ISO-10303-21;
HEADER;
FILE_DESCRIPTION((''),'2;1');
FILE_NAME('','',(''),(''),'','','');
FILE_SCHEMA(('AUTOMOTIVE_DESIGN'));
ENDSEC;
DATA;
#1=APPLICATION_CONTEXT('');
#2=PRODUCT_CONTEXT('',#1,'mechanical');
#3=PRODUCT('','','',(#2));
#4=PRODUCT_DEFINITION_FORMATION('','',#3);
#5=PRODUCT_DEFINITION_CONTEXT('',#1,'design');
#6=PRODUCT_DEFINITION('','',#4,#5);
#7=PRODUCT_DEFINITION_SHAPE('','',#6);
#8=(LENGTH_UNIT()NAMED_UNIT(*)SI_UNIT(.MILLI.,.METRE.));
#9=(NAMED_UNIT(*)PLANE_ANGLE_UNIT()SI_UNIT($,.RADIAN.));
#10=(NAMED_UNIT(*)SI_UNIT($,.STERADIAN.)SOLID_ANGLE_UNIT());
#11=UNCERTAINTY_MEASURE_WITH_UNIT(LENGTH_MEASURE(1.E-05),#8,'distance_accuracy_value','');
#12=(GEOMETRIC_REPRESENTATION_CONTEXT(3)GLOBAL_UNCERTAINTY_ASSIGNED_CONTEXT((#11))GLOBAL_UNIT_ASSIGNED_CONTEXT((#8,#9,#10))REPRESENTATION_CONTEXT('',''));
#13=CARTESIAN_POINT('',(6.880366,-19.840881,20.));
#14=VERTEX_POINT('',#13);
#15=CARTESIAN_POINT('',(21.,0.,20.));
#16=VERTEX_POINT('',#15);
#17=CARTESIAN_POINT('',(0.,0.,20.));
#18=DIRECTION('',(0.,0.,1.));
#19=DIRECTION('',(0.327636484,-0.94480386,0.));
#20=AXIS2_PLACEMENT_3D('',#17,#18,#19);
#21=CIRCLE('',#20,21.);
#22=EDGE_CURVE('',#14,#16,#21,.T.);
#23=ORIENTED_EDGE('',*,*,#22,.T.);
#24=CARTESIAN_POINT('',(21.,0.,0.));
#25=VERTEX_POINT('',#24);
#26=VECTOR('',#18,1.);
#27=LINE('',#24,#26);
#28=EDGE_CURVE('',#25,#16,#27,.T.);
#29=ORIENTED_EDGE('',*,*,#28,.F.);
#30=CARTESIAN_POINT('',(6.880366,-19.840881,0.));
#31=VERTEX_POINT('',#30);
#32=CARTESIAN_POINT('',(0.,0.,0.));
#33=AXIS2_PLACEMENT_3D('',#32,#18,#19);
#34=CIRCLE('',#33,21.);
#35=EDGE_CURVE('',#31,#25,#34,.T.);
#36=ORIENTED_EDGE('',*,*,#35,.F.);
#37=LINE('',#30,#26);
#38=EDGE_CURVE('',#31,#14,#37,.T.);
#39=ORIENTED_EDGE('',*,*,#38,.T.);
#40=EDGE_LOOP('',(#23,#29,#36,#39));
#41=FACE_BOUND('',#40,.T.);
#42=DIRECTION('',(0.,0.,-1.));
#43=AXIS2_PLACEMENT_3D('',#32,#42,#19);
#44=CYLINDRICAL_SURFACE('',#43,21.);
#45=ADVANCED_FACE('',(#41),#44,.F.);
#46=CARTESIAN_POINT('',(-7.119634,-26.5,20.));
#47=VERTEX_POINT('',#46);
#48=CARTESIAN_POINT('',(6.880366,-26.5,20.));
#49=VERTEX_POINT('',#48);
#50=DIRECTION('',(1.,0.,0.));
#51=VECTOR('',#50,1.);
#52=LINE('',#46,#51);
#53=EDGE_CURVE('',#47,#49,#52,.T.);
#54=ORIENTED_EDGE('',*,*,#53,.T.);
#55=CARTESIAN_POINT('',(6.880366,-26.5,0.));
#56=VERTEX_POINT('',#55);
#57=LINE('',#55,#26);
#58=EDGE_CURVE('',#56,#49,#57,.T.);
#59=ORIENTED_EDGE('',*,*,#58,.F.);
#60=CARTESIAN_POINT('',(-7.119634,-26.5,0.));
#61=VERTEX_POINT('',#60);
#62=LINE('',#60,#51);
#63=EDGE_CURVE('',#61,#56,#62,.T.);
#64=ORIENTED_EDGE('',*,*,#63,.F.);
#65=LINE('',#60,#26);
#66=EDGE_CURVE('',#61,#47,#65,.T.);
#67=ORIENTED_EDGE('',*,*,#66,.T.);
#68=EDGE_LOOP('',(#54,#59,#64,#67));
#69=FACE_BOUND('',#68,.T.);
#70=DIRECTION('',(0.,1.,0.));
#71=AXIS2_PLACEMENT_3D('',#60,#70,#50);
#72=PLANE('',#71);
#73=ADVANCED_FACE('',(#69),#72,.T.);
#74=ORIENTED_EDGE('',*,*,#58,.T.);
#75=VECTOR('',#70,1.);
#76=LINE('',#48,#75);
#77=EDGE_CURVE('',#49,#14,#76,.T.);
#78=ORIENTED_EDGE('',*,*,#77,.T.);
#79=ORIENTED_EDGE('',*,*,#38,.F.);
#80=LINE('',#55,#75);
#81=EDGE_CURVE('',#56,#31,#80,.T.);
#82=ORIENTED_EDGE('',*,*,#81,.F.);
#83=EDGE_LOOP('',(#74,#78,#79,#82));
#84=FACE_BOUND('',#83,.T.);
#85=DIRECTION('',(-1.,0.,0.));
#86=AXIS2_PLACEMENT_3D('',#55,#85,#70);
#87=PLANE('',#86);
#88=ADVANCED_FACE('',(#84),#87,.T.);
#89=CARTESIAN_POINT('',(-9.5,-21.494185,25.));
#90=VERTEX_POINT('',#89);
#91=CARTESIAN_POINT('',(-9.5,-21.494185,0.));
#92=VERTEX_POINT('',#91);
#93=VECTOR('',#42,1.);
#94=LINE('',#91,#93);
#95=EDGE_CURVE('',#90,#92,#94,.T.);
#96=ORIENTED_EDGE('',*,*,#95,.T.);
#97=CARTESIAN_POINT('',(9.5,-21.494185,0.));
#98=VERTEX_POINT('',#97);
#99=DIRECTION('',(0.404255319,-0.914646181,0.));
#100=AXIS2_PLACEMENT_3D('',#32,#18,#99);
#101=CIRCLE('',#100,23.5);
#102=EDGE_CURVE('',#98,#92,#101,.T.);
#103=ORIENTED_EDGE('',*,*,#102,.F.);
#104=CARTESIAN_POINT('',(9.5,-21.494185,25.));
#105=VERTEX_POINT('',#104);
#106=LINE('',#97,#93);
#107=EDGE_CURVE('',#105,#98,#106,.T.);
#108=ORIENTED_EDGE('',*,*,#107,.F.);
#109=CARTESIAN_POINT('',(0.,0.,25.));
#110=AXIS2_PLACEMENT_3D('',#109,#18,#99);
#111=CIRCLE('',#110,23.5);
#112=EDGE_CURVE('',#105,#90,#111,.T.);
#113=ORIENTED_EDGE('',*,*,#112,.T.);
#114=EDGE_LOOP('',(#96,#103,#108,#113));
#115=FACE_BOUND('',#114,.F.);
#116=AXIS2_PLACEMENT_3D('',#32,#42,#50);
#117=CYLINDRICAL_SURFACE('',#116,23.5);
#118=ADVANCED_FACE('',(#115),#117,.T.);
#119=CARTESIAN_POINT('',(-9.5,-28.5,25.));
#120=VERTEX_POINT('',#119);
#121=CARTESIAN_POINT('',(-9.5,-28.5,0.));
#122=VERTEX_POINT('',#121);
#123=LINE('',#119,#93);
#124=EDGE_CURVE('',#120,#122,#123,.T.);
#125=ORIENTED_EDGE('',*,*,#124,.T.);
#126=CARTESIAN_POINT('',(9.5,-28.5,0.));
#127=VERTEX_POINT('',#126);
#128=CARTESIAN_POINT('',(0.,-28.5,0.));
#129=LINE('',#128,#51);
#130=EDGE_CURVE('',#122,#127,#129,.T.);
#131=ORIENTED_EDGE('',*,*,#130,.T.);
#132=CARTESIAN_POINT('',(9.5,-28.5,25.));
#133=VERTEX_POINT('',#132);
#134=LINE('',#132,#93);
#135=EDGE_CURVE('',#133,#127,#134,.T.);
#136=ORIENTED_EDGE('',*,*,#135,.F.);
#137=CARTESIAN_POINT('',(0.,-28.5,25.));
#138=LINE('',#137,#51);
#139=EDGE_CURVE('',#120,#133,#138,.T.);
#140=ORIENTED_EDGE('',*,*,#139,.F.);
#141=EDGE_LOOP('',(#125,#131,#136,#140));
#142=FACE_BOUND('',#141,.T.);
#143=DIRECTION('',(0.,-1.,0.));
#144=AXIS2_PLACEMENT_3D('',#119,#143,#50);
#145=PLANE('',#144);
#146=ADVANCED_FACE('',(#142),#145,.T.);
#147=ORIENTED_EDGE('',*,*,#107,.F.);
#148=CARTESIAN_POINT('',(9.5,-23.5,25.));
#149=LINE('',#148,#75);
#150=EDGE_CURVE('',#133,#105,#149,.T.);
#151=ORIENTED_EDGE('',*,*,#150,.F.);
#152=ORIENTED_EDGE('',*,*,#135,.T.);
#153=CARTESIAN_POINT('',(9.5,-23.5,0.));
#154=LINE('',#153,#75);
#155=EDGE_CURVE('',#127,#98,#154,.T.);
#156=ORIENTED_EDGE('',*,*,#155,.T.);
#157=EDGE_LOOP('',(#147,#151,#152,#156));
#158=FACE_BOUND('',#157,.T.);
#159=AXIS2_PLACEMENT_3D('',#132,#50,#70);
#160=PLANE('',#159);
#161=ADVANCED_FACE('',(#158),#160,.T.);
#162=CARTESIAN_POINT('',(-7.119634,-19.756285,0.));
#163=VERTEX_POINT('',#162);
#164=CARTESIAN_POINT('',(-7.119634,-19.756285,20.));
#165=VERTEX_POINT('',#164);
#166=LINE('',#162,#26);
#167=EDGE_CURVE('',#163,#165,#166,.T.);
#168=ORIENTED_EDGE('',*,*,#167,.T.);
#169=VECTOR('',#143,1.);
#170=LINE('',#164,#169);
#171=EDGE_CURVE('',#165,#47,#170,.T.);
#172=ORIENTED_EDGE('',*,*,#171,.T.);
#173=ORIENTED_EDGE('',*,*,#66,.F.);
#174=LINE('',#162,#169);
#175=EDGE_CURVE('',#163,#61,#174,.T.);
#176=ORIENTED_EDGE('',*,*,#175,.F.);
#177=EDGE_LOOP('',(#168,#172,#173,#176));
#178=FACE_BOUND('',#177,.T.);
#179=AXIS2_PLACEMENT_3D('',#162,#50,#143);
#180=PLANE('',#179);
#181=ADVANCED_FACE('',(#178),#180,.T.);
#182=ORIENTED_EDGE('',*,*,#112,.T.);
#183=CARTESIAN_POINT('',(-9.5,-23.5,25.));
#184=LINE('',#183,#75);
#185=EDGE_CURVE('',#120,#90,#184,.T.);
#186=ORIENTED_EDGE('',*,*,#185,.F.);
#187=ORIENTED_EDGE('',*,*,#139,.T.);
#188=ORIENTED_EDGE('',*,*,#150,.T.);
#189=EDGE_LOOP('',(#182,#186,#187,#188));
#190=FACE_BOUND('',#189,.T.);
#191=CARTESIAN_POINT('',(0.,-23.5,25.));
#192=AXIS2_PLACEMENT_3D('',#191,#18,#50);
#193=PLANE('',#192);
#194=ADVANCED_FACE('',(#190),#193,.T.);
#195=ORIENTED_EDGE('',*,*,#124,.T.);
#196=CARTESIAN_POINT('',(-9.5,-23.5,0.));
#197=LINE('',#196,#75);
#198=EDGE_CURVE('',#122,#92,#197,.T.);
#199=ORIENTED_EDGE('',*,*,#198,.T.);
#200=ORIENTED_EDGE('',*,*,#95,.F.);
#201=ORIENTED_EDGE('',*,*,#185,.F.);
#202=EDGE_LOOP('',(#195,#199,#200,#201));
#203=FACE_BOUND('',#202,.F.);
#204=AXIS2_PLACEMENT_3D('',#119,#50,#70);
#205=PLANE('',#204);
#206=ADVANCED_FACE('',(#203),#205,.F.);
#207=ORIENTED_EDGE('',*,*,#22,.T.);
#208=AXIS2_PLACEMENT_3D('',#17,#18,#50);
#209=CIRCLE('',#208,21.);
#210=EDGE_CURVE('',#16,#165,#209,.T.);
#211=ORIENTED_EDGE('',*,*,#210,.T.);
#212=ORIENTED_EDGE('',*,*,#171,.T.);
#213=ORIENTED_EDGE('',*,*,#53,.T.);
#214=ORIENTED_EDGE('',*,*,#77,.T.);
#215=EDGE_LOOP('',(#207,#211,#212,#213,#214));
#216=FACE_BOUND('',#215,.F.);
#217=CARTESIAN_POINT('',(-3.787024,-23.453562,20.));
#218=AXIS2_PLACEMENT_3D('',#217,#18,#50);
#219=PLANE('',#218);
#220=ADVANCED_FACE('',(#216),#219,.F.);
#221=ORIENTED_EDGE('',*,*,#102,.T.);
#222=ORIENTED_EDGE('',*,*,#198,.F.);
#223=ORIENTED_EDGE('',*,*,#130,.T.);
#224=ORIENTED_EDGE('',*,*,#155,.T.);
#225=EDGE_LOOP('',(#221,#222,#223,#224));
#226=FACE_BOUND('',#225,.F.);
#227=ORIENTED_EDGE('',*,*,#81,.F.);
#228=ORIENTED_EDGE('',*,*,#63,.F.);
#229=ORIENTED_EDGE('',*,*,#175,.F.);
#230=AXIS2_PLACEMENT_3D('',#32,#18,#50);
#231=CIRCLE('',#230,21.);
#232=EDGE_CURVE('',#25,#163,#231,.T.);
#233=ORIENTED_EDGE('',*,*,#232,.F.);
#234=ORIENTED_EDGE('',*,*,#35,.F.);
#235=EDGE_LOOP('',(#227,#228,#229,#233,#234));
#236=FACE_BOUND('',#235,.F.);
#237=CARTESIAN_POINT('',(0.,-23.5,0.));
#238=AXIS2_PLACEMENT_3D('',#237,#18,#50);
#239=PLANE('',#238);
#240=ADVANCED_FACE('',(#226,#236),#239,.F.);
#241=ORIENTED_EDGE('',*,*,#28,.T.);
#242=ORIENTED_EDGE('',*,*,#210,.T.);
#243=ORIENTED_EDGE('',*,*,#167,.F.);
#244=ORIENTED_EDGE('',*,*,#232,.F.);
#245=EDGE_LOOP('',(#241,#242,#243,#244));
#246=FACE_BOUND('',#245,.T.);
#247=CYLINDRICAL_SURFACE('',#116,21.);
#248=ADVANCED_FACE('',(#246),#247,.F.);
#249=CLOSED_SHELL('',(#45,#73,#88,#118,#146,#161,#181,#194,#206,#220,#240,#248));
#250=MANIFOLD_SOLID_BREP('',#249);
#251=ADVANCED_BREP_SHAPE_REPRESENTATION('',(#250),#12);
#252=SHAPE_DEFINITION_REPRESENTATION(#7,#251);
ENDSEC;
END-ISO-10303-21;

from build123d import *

# Parameters (mm, degrees)
F0_R     = 23.5
F1_DEPTH = 25
F2_W     = 19
F2_H     = 10
F3_DEPTH = 25
F5_DEPTH = 20


# Not quite as in the source:
# - a feature names something its author has since deleted; it is built from what else it names


with BuildPart() as f1:
    # F0 (on Top) → F1 (new body)
    with BuildSketch(Plane.XY):
        Circle(F0_R)
    extrude(amount=F1_DEPTH)

    # F2 (on face) → F3 (join)
    with BuildSketch(Plane.XY.offset(25)):
        with Locations((0, -23.5)):
            Rectangle(F2_W, F2_H)
    extrude(amount=-F3_DEPTH)

    # F4 (on Top) → F5 (cut)
    with BuildSketch(Plane.XY):
        with BuildLine():
            Line((-0.1196338324, -26.5), (-0.094803203, -20.9997860073))
            ThreePointArc((-0.094803203, -20.9997860073), (-3.6604096567, -20.6785251202), (-7.1196338324, -19.7562854325))
            Line((-7.1196338324, -19.7562854325), (-7.1196338324, -26.5))
            Line((-7.1196338324, -26.5), (-0.1196338324, -26.5))
        make_face()
        with BuildLine():
            ThreePointArc((6.8803661676, -19.8408810641), (3.4419080977, -20.7160147868), (-0.094803203, -20.9997860073))
            Line((-0.094803203, -20.9997860073), (-0.1196338324, -26.5))
            Line((-0.1196338324, -26.5), (6.8803661676, -26.5))
            Line((6.8803661676, -26.5), (6.8803661676, -19.8408810641))
        make_face()
        with BuildLine():
            ThreePointArc((-7.1196338324, -19.7562854325), (-3.6604096567, -20.6785251202), (-0.094803203, -20.9997860073))
            ThreePointArc((-0.094803203, -20.9997860073), (3.4419080977, -20.7160147868), (6.8803661676, -19.8408810641))
            ThreePointArc((6.8803661676, -19.8408810641), (17.1097587581, -12.1760484247), (21, 0))
            ThreePointArc((21, 0), (-12.0724415409, 17.1830193866), (-7.1196338324, -19.7562854325))
        make_face()
    extrude(amount=F5_DEPTH, mode=Mode.SUBTRACT)


solid = f1.part
